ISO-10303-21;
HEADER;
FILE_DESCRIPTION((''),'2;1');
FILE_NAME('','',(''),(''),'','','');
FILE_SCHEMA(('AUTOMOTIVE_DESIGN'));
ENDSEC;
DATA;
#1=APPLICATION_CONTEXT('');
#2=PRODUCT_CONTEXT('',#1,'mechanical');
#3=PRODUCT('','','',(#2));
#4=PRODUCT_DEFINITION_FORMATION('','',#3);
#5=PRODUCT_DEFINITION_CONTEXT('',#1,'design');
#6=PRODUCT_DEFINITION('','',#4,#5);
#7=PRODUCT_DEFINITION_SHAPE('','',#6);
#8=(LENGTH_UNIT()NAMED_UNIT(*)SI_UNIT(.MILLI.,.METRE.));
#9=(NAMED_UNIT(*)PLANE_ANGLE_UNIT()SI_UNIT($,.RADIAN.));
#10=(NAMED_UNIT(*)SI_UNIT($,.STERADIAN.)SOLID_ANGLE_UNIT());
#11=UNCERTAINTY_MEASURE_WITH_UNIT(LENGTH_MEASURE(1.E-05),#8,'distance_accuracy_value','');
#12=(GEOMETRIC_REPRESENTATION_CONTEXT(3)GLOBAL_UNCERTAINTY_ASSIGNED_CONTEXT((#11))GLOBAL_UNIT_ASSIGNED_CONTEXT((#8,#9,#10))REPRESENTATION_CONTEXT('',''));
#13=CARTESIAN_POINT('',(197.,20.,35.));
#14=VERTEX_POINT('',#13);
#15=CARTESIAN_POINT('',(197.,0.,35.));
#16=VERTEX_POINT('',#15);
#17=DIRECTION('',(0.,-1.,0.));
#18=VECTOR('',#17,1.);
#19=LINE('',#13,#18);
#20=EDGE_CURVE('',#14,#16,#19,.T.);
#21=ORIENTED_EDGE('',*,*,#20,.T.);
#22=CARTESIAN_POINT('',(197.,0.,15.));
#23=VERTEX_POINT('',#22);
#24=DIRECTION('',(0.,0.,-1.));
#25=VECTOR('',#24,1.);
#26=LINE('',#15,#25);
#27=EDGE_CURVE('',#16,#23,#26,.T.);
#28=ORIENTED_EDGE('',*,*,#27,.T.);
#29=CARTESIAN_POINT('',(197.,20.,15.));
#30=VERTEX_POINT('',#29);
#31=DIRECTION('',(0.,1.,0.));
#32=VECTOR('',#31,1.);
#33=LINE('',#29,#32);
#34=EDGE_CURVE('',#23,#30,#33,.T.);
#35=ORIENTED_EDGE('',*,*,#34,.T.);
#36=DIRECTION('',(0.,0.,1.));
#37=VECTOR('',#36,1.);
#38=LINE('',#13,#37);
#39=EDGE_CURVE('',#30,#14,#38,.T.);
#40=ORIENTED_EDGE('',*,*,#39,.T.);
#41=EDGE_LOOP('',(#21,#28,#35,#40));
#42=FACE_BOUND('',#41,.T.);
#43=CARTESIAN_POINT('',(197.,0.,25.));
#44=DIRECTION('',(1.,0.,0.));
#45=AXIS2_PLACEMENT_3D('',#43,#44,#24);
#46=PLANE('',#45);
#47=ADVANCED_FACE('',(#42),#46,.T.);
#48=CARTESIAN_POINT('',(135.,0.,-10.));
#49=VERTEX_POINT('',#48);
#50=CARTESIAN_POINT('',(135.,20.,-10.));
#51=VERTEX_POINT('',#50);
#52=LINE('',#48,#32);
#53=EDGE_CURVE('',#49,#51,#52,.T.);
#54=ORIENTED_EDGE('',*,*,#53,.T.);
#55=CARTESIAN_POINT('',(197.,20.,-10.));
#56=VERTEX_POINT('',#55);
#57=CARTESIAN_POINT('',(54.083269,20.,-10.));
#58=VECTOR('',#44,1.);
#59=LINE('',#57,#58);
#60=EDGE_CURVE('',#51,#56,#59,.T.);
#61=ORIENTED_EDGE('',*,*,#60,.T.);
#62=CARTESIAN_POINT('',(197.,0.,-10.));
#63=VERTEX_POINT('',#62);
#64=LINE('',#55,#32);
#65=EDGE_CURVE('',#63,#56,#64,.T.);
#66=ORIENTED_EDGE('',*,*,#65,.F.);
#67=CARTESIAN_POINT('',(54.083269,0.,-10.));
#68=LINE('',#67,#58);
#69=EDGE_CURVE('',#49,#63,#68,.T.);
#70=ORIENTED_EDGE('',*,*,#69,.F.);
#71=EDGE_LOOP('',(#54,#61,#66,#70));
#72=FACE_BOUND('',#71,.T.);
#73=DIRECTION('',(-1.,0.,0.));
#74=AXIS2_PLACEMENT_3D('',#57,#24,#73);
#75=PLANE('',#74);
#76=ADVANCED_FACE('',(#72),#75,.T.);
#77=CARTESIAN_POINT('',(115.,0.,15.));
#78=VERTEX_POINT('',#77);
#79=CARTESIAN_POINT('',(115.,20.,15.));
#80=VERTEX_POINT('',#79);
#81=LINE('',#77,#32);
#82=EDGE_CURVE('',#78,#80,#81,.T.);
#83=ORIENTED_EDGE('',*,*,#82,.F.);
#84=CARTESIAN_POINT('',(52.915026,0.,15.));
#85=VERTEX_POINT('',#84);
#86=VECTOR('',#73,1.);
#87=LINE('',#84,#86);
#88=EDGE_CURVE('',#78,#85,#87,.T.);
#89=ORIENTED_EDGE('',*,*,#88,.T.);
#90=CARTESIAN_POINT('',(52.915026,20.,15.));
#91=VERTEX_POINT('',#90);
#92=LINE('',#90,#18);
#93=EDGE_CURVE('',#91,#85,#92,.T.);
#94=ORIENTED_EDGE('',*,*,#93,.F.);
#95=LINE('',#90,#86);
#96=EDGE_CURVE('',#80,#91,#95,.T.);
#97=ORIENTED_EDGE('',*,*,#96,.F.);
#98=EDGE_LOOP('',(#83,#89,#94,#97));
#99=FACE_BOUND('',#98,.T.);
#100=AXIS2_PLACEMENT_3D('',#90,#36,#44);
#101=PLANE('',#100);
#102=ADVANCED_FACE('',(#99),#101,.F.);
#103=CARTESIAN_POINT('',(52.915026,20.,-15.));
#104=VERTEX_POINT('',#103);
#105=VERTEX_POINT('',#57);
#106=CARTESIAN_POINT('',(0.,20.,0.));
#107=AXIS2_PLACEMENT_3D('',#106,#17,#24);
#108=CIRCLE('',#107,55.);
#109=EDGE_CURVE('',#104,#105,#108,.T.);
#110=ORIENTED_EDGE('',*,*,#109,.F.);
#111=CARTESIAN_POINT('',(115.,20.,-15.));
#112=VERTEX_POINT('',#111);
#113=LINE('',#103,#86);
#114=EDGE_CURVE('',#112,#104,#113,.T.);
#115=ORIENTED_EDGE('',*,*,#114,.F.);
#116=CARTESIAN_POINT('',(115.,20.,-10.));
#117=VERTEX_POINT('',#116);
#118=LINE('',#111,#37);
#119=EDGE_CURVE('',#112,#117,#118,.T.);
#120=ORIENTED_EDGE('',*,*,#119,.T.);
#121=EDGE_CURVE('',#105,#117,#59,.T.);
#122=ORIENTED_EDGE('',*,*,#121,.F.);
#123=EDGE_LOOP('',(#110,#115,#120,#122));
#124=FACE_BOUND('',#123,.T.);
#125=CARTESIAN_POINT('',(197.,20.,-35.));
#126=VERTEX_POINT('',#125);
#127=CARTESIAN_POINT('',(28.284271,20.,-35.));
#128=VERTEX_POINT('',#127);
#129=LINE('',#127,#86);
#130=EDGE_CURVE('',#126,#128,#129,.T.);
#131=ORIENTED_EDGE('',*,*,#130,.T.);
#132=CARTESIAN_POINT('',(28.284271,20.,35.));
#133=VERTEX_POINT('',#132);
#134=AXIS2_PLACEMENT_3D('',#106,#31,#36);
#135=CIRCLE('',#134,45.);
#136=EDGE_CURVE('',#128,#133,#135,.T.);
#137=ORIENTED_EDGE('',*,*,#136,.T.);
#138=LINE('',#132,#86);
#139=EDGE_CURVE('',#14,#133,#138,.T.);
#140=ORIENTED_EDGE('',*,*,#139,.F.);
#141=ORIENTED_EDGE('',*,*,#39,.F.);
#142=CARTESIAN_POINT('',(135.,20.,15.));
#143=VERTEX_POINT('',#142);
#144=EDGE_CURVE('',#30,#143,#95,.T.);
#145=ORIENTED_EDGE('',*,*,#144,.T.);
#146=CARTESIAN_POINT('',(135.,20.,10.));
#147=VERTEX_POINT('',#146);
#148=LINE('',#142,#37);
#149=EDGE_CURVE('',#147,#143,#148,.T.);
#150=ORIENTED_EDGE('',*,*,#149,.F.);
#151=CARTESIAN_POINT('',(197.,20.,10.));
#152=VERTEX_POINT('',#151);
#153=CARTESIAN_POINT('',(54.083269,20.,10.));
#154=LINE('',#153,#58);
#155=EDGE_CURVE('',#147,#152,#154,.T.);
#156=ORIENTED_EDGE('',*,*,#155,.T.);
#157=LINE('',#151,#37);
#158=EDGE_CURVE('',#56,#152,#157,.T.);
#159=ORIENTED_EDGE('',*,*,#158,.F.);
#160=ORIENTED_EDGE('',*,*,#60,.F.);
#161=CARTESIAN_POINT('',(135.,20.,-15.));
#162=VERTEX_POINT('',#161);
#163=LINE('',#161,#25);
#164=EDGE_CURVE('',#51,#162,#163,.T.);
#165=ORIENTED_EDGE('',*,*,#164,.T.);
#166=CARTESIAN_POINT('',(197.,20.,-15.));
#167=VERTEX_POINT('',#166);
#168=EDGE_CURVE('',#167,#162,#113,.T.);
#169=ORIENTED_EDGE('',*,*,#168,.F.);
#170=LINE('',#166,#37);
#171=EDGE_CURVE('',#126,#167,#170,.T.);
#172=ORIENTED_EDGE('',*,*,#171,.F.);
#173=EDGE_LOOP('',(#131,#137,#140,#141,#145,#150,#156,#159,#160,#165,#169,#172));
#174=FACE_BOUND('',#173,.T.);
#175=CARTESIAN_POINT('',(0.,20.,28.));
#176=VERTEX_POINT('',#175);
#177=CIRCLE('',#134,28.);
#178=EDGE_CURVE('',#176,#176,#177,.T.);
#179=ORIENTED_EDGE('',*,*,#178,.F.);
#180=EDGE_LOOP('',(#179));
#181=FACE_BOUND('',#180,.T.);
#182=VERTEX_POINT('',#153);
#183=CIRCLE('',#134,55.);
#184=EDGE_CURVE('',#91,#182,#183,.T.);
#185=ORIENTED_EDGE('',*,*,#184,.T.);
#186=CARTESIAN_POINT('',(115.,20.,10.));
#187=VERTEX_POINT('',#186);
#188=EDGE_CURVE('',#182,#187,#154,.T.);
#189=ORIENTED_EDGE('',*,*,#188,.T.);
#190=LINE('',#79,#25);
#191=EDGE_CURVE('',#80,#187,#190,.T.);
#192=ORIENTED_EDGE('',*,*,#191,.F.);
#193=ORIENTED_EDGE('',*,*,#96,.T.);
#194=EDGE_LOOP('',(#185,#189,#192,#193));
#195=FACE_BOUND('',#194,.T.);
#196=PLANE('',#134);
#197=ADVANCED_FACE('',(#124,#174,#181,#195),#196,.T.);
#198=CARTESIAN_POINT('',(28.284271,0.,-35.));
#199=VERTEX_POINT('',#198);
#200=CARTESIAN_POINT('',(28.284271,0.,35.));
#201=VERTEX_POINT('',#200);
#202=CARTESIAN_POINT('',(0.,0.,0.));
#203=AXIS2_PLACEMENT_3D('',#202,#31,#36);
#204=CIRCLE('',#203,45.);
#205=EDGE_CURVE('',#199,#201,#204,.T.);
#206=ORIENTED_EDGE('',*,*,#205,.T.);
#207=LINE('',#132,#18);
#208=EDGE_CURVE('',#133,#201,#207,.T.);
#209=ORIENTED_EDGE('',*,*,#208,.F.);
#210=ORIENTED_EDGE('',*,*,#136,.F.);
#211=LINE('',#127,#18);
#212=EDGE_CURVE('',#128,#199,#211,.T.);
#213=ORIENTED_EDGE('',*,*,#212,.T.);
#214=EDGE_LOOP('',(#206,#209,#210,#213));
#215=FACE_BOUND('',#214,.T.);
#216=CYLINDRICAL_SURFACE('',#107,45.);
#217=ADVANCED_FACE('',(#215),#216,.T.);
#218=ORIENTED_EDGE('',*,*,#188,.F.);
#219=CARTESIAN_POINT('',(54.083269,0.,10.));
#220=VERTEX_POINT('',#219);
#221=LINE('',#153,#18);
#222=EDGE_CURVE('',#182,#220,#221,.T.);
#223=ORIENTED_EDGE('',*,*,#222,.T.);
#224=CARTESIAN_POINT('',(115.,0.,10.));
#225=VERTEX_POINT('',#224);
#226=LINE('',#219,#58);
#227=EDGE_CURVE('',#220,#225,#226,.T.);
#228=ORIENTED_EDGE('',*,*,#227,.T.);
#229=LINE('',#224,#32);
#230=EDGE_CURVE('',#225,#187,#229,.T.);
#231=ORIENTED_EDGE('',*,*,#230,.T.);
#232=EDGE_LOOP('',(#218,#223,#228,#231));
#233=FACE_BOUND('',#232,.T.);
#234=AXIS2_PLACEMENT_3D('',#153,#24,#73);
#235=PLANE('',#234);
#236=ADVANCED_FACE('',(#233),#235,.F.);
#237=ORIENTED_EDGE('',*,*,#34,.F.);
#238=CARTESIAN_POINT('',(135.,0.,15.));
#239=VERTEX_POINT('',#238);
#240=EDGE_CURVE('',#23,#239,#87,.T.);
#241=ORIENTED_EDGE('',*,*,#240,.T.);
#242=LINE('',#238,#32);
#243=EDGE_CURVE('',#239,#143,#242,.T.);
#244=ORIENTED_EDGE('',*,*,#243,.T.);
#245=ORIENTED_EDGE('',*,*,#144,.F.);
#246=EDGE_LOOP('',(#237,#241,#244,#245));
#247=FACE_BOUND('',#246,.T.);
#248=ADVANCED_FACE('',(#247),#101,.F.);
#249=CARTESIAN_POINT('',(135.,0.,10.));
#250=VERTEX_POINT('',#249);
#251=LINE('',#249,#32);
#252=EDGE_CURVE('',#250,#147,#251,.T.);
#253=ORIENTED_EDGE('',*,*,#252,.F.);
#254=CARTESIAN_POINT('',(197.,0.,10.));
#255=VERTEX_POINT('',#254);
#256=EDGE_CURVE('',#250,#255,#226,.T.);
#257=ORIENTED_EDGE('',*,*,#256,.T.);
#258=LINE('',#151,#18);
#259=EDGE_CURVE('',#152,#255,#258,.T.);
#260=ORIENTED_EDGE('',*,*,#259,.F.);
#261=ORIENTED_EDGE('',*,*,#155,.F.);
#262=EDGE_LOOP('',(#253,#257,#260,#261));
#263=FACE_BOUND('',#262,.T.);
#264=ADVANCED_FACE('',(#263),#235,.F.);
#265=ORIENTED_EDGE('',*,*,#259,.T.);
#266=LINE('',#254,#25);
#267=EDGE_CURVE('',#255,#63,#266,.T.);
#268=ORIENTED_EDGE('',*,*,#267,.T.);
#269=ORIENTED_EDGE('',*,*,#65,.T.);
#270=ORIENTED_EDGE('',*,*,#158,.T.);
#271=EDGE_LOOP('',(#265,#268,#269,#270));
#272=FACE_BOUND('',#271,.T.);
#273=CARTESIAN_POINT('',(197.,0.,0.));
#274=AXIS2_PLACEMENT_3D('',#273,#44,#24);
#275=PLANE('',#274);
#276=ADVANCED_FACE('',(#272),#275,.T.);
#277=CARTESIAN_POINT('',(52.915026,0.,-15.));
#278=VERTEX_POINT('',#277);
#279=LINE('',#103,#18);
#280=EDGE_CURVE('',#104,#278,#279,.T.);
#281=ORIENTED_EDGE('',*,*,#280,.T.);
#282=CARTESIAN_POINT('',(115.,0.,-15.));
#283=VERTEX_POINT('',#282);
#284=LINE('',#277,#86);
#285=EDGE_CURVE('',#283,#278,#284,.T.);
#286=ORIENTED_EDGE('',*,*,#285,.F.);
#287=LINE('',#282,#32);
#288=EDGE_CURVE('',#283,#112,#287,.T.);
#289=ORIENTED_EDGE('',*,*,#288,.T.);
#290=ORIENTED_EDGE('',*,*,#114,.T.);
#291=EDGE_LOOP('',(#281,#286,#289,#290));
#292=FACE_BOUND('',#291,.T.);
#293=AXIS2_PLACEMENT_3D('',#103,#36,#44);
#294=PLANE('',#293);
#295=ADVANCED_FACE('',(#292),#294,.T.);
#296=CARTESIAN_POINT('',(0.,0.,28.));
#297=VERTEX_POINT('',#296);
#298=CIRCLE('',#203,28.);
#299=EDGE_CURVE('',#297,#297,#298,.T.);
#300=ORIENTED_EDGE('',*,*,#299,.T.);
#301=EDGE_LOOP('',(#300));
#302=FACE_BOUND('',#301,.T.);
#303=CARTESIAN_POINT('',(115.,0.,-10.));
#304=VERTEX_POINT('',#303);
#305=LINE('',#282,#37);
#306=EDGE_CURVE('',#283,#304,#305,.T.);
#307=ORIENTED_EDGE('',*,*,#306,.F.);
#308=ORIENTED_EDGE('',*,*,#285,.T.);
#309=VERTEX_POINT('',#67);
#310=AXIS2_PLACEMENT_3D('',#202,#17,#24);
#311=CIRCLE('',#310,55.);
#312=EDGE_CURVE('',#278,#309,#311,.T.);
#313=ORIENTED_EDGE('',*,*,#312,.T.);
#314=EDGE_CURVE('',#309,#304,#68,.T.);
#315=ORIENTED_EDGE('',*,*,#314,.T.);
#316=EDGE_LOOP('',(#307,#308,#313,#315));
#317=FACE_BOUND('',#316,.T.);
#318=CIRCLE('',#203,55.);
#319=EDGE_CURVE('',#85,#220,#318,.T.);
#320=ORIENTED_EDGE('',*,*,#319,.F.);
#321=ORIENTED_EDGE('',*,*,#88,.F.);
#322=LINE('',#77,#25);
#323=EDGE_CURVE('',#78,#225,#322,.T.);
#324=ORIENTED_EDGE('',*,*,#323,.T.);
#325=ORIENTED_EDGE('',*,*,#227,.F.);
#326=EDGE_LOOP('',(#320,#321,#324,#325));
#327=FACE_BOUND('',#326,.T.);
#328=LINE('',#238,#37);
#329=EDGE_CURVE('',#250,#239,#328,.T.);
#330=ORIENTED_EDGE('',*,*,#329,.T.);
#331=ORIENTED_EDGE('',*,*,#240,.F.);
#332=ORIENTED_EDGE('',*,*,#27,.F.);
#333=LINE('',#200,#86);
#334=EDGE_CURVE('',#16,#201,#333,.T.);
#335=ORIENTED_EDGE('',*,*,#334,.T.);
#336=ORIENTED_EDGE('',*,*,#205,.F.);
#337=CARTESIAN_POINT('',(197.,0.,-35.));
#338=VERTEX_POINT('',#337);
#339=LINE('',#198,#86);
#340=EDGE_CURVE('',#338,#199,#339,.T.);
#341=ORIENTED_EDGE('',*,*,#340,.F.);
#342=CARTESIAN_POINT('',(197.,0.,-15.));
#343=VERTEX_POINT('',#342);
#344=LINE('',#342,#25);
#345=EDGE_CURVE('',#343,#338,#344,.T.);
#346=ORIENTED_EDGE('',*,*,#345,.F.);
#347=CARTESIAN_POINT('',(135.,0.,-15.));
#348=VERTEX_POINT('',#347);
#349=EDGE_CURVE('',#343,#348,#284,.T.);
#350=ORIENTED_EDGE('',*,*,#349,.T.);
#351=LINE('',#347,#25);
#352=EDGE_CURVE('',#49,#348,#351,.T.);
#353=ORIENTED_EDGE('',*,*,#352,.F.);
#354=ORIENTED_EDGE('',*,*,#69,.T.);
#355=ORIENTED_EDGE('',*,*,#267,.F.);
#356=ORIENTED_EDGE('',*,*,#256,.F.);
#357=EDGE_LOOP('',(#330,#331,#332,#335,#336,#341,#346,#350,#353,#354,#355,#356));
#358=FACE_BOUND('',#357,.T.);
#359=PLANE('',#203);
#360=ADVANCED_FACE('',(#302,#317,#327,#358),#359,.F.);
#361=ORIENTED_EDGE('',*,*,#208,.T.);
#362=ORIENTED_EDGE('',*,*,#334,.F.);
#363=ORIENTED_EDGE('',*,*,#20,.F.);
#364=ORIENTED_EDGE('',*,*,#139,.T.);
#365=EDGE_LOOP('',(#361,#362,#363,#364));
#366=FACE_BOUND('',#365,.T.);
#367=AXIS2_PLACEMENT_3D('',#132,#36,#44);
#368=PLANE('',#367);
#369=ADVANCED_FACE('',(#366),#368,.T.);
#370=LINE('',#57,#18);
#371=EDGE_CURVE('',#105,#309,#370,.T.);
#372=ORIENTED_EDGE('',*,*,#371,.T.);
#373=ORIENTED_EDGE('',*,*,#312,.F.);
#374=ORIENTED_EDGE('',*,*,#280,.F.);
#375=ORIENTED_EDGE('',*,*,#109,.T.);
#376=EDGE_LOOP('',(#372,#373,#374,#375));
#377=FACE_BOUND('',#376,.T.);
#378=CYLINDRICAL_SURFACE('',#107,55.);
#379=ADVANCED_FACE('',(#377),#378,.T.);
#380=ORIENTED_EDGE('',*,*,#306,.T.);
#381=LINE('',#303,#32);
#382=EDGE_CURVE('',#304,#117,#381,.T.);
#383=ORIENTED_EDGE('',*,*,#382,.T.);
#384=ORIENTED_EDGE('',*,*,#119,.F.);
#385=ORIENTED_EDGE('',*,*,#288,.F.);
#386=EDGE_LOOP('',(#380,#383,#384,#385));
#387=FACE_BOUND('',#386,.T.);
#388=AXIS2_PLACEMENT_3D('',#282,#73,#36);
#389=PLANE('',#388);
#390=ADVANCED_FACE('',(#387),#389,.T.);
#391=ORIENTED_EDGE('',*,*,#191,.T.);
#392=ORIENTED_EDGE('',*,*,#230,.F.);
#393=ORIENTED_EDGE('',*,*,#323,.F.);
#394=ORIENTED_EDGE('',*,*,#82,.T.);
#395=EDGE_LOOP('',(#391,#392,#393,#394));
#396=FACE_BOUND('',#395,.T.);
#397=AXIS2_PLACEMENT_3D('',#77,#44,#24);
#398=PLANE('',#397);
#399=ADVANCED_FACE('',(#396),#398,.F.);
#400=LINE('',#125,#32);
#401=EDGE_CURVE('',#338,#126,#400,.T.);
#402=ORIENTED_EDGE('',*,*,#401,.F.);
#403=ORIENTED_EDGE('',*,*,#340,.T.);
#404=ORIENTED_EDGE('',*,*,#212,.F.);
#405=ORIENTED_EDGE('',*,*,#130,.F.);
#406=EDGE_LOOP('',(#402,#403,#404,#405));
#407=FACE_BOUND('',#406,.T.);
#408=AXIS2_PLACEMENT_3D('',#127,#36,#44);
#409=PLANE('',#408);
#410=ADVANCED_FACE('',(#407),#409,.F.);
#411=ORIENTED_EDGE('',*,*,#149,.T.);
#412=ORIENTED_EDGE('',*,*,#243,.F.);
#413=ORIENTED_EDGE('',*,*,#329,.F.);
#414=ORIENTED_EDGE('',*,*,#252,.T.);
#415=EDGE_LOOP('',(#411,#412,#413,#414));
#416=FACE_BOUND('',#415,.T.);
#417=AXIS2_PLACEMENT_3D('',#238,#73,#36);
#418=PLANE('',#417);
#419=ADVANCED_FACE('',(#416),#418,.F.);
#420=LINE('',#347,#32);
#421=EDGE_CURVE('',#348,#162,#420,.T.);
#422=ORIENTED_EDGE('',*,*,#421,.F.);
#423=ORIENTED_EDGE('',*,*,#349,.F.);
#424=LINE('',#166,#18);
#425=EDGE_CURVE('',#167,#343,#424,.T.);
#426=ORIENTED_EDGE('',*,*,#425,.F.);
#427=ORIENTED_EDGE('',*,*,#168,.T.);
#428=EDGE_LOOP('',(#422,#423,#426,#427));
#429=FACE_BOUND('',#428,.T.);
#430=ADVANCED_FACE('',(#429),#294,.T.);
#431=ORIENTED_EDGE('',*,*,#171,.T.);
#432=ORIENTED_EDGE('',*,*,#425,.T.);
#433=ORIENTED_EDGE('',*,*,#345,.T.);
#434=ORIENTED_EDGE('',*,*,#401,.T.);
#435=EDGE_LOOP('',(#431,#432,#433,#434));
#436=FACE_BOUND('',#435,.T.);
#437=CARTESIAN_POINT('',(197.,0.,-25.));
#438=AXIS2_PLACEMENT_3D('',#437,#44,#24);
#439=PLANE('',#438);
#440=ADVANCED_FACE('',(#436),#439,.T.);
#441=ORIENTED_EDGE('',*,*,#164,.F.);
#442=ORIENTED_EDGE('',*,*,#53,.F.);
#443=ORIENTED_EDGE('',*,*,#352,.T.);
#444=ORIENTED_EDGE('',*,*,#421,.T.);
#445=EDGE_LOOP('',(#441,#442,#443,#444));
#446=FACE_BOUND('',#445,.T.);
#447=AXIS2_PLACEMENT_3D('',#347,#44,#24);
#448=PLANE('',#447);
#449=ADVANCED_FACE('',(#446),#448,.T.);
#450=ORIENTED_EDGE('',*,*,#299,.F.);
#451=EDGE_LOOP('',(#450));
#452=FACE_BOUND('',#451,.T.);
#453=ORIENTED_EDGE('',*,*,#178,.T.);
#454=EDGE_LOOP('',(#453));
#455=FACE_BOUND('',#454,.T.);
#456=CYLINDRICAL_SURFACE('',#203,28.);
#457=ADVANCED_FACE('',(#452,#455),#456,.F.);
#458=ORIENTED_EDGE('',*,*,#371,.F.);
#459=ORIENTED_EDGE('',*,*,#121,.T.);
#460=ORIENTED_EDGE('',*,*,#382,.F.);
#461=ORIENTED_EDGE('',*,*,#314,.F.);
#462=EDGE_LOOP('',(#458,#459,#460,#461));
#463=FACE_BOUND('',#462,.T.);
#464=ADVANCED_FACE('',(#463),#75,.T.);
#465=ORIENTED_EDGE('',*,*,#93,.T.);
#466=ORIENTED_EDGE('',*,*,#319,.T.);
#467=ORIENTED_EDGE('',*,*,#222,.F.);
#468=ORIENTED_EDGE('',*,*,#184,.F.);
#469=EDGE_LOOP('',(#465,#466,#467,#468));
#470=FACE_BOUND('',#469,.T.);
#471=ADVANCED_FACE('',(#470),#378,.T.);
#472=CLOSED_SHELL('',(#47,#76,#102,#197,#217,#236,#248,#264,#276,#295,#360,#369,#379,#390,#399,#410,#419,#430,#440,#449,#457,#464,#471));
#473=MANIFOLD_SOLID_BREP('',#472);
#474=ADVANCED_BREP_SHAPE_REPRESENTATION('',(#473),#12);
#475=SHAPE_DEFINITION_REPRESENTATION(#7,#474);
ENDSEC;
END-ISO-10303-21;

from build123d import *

# Parameters (mm, degrees)
STOCK_EXHAUST_M5_WASHER15_B_1_OUTLINE_R = 28
STOCK_EXHAUST_M5_WASHER15_B_1_DEPTH     = 20
SKETCH1_W                               = 20
SKETCH1_H                               = 20
CUT_EXTRUDE1_DEPTH                      = 3
LPATTERN1_COUNT                         = 2
LPATTERN1_PITCH                         = 25
LPATTERN1_COL_COUNT                     = 2
LPATTERN1_COL_PITCH                     = 25


# Read off the part's stored shape, not the designer's step: Stock-Exhaust_M5_washer15_B-1
with BuildPart() as part:
    # Stock-Exhaust_M5_washer15_B-1 outline → Stock-Exhaust_M5_washer15_B-1 (new body)
    with BuildSketch(Plane(origin=(0, 0, 0), x_dir=(1, 0, 0), z_dir=(0, 1, 0))):
        with BuildLine():
            Line((200, -15), (135, -15))
            Line((135, -15), (135, -10))
            Line((135, -10), (200, -10))
            Line((200, -10), (200, 10))
            Line((200, 10), (135, 10))
            Line((135, 10), (135, 15))
            Line((135, 15), (200, 15))
            Line((200, 15), (200, 35))
            Line((200, 35), (28.284271247, 35))
            ThreePointArc((28.284271247, 35), (-45, 0), (28.284271247, -35))
            Line((28.284271247, -35), (200, -35))
            Line((200, -35), (200, -15))
        make_face()
        with BuildLine():
            ThreePointArc((52.915026221, -15), (53.557527969, -12.513640473), (54.083269132, -10))
            Line((54.083269132, -10), (115, -10))
            Line((115, -10), (115, -15))
            Line((115, -15), (52.915026221, -15))
        make_face(mode=Mode.SUBTRACT)
        Circle(STOCK_EXHAUST_M5_WASHER15_B_1_OUTLINE_R, mode=Mode.SUBTRACT)
        with BuildLine():
            ThreePointArc((54.083269132, 10), (53.557527969, 12.513640473), (52.915026221, 15))
            Line((52.915026221, 15), (115, 15))
            Line((115, 15), (115, 10))
            Line((115, 10), (54.083269132, 10))
        make_face(mode=Mode.SUBTRACT)
    extrude(amount=STOCK_EXHAUST_M5_WASHER15_B_1_DEPTH)

    # Sketch1 → Cut-Extrude1 (cut)
    with BuildSketch(Plane(origin=(200, 0, 0), x_dir=(0, 0, -1), z_dir=(1, 0, 0))):
        with Locations((0, 10)):
            Rectangle(SKETCH1_W, SKETCH1_H)
    cut_extrude1 = extrude(amount=-CUT_EXTRUDE1_DEPTH, mode=Mode.SUBTRACT)

    # LPattern1: Cut-Extrude1 ×2
    with Locations(*[(0, 0, -i * LPATTERN1_PITCH) for i in range(1, LPATTERN1_COUNT)]):
        add(cut_extrude1, mode=Mode.SUBTRACT)

    # LPattern1 col: Cut-Extrude1 ×2
    with Locations(*[(0, 0, i * LPATTERN1_COL_PITCH) for i in range(1, LPATTERN1_COL_COUNT)]):
        add(cut_extrude1, mode=Mode.SUBTRACT)


solid = part.part
